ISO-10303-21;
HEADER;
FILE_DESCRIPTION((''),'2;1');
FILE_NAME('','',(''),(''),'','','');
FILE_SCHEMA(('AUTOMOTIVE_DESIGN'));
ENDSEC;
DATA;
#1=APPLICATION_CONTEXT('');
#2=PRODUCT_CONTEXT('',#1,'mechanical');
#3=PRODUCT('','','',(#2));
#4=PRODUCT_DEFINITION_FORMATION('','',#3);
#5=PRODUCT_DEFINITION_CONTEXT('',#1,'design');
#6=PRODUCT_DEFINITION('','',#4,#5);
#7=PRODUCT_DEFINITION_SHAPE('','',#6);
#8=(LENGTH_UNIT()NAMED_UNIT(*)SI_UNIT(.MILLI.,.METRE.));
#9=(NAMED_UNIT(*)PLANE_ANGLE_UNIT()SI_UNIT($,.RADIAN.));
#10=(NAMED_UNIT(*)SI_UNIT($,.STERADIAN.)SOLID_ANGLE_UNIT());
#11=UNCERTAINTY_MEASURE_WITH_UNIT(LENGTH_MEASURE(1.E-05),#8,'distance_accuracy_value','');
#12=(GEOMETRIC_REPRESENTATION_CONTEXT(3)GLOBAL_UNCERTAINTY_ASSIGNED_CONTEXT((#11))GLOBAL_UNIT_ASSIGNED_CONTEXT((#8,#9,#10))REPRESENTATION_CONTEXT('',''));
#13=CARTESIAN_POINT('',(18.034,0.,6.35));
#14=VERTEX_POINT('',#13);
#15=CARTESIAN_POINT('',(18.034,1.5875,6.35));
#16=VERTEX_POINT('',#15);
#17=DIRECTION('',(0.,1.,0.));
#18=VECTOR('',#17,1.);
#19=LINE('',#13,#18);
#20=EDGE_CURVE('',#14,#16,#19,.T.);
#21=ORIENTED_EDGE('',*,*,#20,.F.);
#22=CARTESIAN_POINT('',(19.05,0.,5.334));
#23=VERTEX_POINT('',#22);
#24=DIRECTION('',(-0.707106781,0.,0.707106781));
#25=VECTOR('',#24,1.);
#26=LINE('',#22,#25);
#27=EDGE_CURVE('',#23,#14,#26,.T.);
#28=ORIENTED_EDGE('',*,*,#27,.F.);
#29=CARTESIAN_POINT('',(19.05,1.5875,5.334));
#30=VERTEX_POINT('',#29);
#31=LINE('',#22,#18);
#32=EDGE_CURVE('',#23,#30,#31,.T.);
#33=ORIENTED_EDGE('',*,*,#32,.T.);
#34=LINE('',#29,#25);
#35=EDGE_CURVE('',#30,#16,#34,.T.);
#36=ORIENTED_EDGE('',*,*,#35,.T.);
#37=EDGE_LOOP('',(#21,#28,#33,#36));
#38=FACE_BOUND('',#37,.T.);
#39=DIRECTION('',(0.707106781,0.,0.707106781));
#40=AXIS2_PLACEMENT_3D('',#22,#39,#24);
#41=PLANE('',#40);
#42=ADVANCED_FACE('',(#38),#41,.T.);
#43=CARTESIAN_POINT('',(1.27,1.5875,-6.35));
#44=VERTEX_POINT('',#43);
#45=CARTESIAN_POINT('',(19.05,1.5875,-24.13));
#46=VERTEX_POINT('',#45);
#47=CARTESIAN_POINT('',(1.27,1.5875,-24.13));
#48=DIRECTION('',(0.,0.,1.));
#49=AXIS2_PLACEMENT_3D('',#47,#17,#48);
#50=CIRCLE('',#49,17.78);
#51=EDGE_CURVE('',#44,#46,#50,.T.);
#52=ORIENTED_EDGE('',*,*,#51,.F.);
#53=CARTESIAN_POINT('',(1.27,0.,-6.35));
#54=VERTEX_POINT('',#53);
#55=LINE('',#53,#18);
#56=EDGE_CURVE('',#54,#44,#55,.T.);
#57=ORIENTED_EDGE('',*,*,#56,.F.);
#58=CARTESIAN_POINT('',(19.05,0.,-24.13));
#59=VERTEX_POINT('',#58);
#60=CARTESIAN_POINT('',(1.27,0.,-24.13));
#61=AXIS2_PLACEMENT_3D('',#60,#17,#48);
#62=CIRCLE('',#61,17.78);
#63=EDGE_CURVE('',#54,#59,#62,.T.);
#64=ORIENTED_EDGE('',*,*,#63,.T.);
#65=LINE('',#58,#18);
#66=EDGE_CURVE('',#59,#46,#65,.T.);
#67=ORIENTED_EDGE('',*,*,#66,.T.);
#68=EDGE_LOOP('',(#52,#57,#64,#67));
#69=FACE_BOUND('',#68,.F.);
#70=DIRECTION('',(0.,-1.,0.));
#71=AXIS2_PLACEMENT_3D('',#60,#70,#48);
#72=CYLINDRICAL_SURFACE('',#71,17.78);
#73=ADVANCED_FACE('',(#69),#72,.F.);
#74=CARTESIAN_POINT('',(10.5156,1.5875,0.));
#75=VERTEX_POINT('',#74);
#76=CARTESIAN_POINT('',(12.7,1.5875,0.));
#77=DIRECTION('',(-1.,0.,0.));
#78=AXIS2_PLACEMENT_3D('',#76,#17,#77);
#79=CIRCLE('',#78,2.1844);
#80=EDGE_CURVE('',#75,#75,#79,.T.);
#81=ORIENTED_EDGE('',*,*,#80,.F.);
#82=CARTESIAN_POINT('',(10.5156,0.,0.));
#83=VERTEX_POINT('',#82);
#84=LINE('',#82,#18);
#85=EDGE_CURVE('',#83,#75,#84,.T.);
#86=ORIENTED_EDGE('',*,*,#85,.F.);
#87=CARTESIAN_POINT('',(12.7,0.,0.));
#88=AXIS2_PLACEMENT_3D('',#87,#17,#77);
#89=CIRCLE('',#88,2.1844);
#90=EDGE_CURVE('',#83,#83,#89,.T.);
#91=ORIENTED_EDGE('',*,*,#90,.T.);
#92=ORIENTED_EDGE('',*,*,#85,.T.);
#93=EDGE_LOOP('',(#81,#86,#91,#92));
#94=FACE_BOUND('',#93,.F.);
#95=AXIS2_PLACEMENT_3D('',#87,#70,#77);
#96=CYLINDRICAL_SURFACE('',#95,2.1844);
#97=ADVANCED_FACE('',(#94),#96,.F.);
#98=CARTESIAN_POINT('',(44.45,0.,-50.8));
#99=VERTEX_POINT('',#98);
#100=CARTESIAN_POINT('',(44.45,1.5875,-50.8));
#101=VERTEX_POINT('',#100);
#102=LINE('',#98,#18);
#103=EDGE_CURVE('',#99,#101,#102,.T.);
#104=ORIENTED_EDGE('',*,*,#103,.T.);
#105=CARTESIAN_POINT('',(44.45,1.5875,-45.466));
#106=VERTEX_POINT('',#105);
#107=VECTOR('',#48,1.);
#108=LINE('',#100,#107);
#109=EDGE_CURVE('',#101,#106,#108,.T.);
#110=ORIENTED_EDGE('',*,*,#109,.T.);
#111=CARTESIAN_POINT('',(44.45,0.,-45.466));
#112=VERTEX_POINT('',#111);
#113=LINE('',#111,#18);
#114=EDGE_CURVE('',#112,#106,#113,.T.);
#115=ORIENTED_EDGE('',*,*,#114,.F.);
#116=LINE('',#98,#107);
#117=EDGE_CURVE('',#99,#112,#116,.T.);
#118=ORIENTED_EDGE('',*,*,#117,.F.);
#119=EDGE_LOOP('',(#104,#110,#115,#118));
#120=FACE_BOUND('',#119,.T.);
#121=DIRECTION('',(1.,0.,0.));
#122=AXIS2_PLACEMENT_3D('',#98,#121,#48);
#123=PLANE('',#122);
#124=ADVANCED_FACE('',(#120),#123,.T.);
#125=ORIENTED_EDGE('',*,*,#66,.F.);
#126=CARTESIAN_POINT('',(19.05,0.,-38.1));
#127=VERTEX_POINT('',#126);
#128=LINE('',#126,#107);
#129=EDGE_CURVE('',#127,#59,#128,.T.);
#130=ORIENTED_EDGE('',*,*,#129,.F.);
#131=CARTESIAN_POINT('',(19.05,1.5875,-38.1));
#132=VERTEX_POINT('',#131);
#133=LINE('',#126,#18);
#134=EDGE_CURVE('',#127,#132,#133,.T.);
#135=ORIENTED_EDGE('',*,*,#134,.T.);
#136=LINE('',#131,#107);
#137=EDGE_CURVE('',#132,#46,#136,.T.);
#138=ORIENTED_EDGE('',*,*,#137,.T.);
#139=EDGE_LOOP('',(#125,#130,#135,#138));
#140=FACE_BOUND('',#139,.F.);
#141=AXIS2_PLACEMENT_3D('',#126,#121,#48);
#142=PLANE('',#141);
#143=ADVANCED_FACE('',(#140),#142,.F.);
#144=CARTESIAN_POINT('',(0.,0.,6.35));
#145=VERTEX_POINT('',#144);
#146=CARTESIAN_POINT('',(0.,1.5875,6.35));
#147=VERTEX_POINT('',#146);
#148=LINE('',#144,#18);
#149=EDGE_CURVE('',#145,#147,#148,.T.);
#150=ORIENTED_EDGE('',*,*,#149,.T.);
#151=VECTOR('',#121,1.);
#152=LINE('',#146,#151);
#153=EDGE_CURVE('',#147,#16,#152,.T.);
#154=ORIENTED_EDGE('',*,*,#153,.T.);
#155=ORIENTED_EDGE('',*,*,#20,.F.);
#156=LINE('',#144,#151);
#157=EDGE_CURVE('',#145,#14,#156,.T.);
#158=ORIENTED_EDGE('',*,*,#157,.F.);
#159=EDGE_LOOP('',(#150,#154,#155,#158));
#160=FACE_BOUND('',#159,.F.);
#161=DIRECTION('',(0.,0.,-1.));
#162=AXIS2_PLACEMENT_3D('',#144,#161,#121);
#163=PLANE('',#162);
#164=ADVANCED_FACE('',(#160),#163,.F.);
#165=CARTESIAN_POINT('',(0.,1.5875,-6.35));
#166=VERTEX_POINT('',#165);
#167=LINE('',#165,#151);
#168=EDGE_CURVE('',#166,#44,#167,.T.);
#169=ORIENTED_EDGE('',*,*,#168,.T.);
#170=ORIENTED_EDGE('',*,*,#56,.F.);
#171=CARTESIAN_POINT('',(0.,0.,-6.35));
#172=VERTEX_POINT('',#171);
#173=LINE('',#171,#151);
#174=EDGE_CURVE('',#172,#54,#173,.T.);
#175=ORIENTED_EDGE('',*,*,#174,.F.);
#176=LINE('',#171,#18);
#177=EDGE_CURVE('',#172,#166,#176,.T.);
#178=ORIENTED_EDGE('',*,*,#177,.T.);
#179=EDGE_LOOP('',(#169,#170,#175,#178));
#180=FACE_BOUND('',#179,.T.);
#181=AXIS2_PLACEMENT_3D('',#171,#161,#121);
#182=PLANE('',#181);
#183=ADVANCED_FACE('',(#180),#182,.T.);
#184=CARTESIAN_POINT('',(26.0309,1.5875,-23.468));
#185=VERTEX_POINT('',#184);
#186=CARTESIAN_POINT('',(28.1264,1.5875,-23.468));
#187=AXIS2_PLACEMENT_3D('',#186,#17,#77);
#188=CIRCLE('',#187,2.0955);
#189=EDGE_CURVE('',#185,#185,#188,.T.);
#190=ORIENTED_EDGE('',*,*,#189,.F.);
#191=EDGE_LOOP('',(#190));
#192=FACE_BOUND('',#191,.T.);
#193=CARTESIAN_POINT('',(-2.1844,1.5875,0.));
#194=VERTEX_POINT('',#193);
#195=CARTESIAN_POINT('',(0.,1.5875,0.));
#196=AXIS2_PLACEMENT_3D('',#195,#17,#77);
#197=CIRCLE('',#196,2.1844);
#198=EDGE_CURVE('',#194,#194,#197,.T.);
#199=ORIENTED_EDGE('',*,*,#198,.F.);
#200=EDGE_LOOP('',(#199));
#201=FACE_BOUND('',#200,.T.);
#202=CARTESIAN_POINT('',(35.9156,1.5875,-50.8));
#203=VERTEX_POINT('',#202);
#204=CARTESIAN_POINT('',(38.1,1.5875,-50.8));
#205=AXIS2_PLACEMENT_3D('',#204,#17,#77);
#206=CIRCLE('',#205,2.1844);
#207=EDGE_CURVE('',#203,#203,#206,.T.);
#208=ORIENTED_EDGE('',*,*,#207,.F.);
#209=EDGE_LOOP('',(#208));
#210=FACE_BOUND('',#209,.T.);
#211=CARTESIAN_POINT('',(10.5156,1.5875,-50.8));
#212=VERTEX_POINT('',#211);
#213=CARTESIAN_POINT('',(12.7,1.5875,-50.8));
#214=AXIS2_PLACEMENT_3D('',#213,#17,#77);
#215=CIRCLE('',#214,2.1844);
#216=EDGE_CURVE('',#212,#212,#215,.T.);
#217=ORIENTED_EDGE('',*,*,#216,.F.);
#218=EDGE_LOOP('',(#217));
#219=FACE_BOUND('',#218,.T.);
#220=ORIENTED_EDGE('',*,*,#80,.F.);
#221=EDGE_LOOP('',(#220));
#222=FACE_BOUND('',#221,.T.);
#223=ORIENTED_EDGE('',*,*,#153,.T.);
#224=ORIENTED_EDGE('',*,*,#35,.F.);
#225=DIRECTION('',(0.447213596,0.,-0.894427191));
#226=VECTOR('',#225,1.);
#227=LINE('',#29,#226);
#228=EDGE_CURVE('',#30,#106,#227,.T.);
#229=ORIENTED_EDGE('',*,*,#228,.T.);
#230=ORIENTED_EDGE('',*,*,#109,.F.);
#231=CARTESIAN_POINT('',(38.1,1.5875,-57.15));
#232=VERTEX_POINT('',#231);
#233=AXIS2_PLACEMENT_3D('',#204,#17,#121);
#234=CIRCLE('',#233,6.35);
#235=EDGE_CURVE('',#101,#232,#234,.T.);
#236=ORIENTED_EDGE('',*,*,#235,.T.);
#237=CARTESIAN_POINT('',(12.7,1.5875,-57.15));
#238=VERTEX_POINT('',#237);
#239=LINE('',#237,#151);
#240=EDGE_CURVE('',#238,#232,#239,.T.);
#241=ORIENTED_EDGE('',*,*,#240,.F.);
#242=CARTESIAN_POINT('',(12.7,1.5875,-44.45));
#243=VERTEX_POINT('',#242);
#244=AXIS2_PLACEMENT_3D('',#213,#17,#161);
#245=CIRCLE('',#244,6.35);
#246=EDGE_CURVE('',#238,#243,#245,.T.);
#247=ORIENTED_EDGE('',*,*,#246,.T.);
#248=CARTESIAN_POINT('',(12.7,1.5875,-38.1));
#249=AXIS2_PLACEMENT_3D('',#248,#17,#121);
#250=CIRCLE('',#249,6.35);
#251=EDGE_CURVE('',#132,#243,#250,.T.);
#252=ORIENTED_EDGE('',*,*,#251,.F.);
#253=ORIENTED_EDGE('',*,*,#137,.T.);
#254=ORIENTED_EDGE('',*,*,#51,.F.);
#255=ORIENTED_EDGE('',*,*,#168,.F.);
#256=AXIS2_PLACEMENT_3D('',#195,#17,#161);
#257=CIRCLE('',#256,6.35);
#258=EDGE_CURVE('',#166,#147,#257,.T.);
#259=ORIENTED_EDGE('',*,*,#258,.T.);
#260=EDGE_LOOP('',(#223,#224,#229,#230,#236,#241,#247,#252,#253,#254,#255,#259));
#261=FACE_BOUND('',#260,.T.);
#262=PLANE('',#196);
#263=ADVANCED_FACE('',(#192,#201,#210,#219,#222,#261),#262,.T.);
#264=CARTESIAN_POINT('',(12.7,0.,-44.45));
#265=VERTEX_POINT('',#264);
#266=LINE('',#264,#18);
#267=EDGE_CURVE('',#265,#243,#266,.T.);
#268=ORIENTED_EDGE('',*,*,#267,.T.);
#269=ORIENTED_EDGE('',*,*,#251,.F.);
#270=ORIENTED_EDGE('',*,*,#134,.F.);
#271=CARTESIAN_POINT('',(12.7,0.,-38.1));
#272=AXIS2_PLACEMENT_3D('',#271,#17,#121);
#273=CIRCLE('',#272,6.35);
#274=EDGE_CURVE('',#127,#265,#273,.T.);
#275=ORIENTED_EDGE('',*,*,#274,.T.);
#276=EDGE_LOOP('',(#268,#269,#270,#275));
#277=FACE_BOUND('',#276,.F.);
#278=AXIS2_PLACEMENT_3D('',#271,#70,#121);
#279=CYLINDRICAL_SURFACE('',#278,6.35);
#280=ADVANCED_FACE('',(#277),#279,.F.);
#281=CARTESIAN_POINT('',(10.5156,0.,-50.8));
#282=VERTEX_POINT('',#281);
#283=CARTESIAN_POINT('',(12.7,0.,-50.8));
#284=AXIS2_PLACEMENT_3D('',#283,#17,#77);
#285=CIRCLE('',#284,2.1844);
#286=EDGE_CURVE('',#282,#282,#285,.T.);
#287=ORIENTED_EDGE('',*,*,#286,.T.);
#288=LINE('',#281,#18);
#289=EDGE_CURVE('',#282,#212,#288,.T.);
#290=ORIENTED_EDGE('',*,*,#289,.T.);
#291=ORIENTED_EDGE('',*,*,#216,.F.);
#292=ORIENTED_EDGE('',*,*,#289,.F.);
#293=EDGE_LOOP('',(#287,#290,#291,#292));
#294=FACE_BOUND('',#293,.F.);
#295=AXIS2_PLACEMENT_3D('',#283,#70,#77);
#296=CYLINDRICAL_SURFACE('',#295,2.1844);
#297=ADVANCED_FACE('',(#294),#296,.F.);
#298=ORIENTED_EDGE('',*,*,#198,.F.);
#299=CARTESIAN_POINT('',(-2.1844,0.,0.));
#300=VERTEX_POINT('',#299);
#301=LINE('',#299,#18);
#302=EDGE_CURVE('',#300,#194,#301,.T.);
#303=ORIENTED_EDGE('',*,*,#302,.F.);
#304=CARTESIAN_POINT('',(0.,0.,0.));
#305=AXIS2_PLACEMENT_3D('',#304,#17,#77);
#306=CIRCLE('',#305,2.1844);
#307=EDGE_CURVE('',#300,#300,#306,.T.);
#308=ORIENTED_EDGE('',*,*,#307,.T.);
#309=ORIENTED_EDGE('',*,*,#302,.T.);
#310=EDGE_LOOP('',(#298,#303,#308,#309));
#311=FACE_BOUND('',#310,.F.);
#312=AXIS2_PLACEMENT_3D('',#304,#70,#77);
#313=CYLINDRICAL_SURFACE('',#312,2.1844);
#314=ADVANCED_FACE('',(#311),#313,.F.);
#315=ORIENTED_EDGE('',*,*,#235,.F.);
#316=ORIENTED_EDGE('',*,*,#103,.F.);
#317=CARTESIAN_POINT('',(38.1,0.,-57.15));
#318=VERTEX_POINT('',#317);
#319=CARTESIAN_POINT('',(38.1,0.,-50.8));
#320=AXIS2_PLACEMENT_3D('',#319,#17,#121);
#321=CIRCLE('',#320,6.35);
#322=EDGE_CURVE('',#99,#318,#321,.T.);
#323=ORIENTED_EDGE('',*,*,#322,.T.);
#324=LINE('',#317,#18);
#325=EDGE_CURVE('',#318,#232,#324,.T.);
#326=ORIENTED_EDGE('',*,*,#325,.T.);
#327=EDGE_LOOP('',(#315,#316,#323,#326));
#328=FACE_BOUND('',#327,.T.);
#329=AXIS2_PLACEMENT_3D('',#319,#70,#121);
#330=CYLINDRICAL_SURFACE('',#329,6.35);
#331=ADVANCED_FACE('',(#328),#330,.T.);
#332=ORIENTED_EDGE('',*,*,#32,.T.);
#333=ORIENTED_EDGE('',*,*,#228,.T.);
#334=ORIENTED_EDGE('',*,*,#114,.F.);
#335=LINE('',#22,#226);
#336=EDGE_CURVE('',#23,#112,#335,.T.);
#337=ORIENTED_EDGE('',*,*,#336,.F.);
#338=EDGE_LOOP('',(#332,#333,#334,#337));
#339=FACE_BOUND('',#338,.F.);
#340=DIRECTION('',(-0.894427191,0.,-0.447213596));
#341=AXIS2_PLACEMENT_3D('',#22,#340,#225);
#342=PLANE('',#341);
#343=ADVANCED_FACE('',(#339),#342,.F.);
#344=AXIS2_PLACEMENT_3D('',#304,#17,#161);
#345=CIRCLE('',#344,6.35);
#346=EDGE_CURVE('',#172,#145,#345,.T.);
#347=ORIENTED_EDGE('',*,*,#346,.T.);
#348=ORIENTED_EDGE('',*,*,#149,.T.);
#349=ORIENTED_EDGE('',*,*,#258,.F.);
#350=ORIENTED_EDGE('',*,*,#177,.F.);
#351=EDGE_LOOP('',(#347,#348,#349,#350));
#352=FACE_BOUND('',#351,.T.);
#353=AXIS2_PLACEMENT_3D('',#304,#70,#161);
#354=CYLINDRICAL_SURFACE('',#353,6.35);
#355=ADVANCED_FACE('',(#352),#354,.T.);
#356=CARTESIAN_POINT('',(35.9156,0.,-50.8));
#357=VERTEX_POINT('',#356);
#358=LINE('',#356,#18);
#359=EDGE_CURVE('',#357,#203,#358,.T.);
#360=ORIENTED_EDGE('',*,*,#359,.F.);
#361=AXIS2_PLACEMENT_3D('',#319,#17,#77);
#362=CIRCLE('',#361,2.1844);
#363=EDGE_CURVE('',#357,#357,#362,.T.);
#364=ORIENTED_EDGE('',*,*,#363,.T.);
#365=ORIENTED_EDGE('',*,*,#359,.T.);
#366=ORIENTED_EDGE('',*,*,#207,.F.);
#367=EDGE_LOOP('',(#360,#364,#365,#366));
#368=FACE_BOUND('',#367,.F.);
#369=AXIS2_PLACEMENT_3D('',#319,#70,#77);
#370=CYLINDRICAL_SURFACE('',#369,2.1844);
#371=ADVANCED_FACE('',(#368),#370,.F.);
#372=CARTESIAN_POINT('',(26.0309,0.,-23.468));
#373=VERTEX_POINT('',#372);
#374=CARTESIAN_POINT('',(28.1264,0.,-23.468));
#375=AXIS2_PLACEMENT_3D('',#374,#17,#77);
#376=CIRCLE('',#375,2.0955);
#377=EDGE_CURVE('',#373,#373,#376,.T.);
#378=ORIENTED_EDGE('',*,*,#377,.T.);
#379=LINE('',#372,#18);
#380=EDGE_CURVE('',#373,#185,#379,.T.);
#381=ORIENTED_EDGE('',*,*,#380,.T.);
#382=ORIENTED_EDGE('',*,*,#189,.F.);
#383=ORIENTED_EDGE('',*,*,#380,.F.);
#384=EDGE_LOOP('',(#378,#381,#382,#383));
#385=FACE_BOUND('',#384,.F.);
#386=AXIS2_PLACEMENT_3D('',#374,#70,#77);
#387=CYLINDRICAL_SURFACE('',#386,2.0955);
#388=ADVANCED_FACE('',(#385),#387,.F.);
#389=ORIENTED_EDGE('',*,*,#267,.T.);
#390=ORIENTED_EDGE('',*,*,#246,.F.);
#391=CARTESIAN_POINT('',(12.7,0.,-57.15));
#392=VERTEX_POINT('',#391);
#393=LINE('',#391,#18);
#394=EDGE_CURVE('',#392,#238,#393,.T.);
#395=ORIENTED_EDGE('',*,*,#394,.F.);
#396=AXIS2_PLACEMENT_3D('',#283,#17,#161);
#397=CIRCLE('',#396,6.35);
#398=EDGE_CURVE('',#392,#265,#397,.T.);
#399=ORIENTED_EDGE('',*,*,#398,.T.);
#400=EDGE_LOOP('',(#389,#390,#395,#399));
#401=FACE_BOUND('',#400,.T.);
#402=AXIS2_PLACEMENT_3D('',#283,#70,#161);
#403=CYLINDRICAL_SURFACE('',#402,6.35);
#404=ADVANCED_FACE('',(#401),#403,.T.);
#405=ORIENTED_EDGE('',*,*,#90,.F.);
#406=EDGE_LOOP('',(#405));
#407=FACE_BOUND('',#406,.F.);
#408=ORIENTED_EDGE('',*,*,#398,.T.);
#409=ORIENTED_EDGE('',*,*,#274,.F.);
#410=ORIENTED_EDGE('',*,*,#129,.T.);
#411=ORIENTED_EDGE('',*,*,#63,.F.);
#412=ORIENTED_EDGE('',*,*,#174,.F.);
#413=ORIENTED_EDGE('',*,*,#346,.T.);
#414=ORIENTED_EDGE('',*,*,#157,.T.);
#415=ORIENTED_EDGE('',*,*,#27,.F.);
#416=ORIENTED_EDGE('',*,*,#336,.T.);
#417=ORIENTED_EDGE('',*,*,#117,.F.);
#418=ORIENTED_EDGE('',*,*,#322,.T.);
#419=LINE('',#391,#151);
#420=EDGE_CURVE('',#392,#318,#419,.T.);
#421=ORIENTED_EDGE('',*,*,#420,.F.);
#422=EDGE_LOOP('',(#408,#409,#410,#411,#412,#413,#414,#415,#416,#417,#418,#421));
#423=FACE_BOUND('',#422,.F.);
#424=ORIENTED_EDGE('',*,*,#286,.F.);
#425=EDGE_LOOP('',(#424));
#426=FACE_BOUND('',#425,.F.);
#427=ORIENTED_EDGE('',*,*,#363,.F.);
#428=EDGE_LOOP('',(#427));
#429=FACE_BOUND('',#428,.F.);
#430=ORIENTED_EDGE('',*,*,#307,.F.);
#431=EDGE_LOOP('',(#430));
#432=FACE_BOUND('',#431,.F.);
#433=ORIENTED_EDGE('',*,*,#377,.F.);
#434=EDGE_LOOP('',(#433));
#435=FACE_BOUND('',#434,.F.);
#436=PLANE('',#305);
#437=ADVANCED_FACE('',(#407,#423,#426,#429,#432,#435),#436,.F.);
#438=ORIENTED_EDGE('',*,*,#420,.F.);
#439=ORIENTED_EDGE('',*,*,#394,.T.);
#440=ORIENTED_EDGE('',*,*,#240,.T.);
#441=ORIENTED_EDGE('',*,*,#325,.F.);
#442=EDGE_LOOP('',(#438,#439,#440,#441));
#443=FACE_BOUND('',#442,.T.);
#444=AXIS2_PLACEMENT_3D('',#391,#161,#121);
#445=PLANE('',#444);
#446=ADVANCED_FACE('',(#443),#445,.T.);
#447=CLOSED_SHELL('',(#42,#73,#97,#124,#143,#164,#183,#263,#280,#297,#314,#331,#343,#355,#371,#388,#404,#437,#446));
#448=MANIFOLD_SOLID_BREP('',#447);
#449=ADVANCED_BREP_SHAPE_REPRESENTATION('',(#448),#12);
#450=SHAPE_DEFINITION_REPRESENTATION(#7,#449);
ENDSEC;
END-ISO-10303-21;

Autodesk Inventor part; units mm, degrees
ref_plane "YZ Plane" through (0, 0, 0) normal (1, 0, 0) x (0, 1, 0)
ref_plane "XZ Plane" through (0, 0, 0) normal (0, 1, 0) x (-1, 0, 0)
ref_plane "XY Plane" through (0, 0, 0) normal (0, 0, 1) x (1, 0, 0)
sketch "main" plane through (0, 0, 0) normal (0, 0, 1) x (1, 0, 0)
  circle A0 centre (11.2296, 26.3602) radius 2.1844
  line L0 (23.9296, 20.0102) -> (22.6596, 20.0102)
  line L1 (4.8796, 31.6942) -> (5.8956, 32.7102)
  circle A1 centre (23.9296, 26.3602) radius 2.1844
  line L2 (23.9296, 32.7102) -> (5.8956, 32.7102)
  arc A2 (23.9296, 20.0102) -> (23.9296, 32.7102) centre (23.9296, 26.3602) ccw
  circle A3 centre (-14.1704, -24.4398) radius 2.1844
  circle A4 centre (11.2296, -24.4398) radius 2.1844
  arc A5 (22.6596, 20.0102) -> (4.8796, 2.2302) centre (22.6596, 2.2302) ccw
  line L3 (4.8796, -11.7398) -> (4.8796, 2.2302)
  arc A6 (4.8796, -11.7398) -> (11.2296, -18.0898) centre (11.2296, -11.7398) ccw
  line L4 (4.8796, 31.6942) -> (-20.5204, -19.1058)
  arc A7 (11.2296, -30.7898) -> (11.2296, -18.0898) centre (11.2296, -24.4398) ccw
  line L5 (11.2296, -30.7898) -> (-14.1704, -30.7898)
  line L6 (-20.5204, -24.4398) -> (-20.5204, -19.1058)
  arc A8 (-20.5204, -24.4398) -> (-14.1704, -30.7898) centre (-14.1704, -24.4398) ccw
  circle A9 centre (-4.1968, 2.8922) radius 2.0955
  point P0 (6.0044, -0.2269)
  dimension "d0" = 12.7
  dimension "d1" = 17.78
  dimension "d2" = 6.35
  dimension "d3" = 1.27
  dimension "d4" = 6.35
  dimension "d8" = 4.191
sketch "Sketch1" plane through (0, 0, 0) normal (0, 1, 0) x (-1, 0, 0)
  circle A0 centre (-12.7, 0) radius 2.1844
  line L0 (0, -6.35) -> (-1.27, -6.35)
  line L1 (-19.05, 5.334) -> (-18.034, 6.35)
  circle A1 centre (0, 0) radius 2.1844
  line L2 (0, 6.35) -> (-18.034, 6.35)
  arc A2 (0, -6.35) -> (0, 6.35) centre (0, 0) ccw
  circle A3 centre (-38.1, -50.8) radius 2.1844
  circle A4 centre (-12.7, -50.8) radius 2.1844
  arc A5 (-1.27, -6.35) -> (-19.05, -24.13) centre (-1.27, -24.13) ccw
  line L3 (-19.05, -38.1) -> (-19.05, -24.13)
  arc A6 (-19.05, -38.1) -> (-12.7, -44.45) centre (-12.7, -38.1) ccw
  line L4 (-19.05, 5.334) -> (-44.45, -45.466)
  arc A7 (-12.7, -57.15) -> (-12.7, -44.45) centre (-12.7, -50.8) ccw
  line L5 (-12.7, -57.15) -> (-38.1, -57.15)
  line L6 (-44.45, -50.8) -> (-44.45, -45.466)
  arc A8 (-44.45, -50.8) -> (-38.1, -57.15) centre (-38.1, -50.8) ccw
  circle A9 centre (-28.1264, -23.468) radius 2.0955
extrude "Extrusion1" add sketch "Sketch1" along normal blind 1.5875
properties part number "Front Gusset" material "Acetal Resin, White"
